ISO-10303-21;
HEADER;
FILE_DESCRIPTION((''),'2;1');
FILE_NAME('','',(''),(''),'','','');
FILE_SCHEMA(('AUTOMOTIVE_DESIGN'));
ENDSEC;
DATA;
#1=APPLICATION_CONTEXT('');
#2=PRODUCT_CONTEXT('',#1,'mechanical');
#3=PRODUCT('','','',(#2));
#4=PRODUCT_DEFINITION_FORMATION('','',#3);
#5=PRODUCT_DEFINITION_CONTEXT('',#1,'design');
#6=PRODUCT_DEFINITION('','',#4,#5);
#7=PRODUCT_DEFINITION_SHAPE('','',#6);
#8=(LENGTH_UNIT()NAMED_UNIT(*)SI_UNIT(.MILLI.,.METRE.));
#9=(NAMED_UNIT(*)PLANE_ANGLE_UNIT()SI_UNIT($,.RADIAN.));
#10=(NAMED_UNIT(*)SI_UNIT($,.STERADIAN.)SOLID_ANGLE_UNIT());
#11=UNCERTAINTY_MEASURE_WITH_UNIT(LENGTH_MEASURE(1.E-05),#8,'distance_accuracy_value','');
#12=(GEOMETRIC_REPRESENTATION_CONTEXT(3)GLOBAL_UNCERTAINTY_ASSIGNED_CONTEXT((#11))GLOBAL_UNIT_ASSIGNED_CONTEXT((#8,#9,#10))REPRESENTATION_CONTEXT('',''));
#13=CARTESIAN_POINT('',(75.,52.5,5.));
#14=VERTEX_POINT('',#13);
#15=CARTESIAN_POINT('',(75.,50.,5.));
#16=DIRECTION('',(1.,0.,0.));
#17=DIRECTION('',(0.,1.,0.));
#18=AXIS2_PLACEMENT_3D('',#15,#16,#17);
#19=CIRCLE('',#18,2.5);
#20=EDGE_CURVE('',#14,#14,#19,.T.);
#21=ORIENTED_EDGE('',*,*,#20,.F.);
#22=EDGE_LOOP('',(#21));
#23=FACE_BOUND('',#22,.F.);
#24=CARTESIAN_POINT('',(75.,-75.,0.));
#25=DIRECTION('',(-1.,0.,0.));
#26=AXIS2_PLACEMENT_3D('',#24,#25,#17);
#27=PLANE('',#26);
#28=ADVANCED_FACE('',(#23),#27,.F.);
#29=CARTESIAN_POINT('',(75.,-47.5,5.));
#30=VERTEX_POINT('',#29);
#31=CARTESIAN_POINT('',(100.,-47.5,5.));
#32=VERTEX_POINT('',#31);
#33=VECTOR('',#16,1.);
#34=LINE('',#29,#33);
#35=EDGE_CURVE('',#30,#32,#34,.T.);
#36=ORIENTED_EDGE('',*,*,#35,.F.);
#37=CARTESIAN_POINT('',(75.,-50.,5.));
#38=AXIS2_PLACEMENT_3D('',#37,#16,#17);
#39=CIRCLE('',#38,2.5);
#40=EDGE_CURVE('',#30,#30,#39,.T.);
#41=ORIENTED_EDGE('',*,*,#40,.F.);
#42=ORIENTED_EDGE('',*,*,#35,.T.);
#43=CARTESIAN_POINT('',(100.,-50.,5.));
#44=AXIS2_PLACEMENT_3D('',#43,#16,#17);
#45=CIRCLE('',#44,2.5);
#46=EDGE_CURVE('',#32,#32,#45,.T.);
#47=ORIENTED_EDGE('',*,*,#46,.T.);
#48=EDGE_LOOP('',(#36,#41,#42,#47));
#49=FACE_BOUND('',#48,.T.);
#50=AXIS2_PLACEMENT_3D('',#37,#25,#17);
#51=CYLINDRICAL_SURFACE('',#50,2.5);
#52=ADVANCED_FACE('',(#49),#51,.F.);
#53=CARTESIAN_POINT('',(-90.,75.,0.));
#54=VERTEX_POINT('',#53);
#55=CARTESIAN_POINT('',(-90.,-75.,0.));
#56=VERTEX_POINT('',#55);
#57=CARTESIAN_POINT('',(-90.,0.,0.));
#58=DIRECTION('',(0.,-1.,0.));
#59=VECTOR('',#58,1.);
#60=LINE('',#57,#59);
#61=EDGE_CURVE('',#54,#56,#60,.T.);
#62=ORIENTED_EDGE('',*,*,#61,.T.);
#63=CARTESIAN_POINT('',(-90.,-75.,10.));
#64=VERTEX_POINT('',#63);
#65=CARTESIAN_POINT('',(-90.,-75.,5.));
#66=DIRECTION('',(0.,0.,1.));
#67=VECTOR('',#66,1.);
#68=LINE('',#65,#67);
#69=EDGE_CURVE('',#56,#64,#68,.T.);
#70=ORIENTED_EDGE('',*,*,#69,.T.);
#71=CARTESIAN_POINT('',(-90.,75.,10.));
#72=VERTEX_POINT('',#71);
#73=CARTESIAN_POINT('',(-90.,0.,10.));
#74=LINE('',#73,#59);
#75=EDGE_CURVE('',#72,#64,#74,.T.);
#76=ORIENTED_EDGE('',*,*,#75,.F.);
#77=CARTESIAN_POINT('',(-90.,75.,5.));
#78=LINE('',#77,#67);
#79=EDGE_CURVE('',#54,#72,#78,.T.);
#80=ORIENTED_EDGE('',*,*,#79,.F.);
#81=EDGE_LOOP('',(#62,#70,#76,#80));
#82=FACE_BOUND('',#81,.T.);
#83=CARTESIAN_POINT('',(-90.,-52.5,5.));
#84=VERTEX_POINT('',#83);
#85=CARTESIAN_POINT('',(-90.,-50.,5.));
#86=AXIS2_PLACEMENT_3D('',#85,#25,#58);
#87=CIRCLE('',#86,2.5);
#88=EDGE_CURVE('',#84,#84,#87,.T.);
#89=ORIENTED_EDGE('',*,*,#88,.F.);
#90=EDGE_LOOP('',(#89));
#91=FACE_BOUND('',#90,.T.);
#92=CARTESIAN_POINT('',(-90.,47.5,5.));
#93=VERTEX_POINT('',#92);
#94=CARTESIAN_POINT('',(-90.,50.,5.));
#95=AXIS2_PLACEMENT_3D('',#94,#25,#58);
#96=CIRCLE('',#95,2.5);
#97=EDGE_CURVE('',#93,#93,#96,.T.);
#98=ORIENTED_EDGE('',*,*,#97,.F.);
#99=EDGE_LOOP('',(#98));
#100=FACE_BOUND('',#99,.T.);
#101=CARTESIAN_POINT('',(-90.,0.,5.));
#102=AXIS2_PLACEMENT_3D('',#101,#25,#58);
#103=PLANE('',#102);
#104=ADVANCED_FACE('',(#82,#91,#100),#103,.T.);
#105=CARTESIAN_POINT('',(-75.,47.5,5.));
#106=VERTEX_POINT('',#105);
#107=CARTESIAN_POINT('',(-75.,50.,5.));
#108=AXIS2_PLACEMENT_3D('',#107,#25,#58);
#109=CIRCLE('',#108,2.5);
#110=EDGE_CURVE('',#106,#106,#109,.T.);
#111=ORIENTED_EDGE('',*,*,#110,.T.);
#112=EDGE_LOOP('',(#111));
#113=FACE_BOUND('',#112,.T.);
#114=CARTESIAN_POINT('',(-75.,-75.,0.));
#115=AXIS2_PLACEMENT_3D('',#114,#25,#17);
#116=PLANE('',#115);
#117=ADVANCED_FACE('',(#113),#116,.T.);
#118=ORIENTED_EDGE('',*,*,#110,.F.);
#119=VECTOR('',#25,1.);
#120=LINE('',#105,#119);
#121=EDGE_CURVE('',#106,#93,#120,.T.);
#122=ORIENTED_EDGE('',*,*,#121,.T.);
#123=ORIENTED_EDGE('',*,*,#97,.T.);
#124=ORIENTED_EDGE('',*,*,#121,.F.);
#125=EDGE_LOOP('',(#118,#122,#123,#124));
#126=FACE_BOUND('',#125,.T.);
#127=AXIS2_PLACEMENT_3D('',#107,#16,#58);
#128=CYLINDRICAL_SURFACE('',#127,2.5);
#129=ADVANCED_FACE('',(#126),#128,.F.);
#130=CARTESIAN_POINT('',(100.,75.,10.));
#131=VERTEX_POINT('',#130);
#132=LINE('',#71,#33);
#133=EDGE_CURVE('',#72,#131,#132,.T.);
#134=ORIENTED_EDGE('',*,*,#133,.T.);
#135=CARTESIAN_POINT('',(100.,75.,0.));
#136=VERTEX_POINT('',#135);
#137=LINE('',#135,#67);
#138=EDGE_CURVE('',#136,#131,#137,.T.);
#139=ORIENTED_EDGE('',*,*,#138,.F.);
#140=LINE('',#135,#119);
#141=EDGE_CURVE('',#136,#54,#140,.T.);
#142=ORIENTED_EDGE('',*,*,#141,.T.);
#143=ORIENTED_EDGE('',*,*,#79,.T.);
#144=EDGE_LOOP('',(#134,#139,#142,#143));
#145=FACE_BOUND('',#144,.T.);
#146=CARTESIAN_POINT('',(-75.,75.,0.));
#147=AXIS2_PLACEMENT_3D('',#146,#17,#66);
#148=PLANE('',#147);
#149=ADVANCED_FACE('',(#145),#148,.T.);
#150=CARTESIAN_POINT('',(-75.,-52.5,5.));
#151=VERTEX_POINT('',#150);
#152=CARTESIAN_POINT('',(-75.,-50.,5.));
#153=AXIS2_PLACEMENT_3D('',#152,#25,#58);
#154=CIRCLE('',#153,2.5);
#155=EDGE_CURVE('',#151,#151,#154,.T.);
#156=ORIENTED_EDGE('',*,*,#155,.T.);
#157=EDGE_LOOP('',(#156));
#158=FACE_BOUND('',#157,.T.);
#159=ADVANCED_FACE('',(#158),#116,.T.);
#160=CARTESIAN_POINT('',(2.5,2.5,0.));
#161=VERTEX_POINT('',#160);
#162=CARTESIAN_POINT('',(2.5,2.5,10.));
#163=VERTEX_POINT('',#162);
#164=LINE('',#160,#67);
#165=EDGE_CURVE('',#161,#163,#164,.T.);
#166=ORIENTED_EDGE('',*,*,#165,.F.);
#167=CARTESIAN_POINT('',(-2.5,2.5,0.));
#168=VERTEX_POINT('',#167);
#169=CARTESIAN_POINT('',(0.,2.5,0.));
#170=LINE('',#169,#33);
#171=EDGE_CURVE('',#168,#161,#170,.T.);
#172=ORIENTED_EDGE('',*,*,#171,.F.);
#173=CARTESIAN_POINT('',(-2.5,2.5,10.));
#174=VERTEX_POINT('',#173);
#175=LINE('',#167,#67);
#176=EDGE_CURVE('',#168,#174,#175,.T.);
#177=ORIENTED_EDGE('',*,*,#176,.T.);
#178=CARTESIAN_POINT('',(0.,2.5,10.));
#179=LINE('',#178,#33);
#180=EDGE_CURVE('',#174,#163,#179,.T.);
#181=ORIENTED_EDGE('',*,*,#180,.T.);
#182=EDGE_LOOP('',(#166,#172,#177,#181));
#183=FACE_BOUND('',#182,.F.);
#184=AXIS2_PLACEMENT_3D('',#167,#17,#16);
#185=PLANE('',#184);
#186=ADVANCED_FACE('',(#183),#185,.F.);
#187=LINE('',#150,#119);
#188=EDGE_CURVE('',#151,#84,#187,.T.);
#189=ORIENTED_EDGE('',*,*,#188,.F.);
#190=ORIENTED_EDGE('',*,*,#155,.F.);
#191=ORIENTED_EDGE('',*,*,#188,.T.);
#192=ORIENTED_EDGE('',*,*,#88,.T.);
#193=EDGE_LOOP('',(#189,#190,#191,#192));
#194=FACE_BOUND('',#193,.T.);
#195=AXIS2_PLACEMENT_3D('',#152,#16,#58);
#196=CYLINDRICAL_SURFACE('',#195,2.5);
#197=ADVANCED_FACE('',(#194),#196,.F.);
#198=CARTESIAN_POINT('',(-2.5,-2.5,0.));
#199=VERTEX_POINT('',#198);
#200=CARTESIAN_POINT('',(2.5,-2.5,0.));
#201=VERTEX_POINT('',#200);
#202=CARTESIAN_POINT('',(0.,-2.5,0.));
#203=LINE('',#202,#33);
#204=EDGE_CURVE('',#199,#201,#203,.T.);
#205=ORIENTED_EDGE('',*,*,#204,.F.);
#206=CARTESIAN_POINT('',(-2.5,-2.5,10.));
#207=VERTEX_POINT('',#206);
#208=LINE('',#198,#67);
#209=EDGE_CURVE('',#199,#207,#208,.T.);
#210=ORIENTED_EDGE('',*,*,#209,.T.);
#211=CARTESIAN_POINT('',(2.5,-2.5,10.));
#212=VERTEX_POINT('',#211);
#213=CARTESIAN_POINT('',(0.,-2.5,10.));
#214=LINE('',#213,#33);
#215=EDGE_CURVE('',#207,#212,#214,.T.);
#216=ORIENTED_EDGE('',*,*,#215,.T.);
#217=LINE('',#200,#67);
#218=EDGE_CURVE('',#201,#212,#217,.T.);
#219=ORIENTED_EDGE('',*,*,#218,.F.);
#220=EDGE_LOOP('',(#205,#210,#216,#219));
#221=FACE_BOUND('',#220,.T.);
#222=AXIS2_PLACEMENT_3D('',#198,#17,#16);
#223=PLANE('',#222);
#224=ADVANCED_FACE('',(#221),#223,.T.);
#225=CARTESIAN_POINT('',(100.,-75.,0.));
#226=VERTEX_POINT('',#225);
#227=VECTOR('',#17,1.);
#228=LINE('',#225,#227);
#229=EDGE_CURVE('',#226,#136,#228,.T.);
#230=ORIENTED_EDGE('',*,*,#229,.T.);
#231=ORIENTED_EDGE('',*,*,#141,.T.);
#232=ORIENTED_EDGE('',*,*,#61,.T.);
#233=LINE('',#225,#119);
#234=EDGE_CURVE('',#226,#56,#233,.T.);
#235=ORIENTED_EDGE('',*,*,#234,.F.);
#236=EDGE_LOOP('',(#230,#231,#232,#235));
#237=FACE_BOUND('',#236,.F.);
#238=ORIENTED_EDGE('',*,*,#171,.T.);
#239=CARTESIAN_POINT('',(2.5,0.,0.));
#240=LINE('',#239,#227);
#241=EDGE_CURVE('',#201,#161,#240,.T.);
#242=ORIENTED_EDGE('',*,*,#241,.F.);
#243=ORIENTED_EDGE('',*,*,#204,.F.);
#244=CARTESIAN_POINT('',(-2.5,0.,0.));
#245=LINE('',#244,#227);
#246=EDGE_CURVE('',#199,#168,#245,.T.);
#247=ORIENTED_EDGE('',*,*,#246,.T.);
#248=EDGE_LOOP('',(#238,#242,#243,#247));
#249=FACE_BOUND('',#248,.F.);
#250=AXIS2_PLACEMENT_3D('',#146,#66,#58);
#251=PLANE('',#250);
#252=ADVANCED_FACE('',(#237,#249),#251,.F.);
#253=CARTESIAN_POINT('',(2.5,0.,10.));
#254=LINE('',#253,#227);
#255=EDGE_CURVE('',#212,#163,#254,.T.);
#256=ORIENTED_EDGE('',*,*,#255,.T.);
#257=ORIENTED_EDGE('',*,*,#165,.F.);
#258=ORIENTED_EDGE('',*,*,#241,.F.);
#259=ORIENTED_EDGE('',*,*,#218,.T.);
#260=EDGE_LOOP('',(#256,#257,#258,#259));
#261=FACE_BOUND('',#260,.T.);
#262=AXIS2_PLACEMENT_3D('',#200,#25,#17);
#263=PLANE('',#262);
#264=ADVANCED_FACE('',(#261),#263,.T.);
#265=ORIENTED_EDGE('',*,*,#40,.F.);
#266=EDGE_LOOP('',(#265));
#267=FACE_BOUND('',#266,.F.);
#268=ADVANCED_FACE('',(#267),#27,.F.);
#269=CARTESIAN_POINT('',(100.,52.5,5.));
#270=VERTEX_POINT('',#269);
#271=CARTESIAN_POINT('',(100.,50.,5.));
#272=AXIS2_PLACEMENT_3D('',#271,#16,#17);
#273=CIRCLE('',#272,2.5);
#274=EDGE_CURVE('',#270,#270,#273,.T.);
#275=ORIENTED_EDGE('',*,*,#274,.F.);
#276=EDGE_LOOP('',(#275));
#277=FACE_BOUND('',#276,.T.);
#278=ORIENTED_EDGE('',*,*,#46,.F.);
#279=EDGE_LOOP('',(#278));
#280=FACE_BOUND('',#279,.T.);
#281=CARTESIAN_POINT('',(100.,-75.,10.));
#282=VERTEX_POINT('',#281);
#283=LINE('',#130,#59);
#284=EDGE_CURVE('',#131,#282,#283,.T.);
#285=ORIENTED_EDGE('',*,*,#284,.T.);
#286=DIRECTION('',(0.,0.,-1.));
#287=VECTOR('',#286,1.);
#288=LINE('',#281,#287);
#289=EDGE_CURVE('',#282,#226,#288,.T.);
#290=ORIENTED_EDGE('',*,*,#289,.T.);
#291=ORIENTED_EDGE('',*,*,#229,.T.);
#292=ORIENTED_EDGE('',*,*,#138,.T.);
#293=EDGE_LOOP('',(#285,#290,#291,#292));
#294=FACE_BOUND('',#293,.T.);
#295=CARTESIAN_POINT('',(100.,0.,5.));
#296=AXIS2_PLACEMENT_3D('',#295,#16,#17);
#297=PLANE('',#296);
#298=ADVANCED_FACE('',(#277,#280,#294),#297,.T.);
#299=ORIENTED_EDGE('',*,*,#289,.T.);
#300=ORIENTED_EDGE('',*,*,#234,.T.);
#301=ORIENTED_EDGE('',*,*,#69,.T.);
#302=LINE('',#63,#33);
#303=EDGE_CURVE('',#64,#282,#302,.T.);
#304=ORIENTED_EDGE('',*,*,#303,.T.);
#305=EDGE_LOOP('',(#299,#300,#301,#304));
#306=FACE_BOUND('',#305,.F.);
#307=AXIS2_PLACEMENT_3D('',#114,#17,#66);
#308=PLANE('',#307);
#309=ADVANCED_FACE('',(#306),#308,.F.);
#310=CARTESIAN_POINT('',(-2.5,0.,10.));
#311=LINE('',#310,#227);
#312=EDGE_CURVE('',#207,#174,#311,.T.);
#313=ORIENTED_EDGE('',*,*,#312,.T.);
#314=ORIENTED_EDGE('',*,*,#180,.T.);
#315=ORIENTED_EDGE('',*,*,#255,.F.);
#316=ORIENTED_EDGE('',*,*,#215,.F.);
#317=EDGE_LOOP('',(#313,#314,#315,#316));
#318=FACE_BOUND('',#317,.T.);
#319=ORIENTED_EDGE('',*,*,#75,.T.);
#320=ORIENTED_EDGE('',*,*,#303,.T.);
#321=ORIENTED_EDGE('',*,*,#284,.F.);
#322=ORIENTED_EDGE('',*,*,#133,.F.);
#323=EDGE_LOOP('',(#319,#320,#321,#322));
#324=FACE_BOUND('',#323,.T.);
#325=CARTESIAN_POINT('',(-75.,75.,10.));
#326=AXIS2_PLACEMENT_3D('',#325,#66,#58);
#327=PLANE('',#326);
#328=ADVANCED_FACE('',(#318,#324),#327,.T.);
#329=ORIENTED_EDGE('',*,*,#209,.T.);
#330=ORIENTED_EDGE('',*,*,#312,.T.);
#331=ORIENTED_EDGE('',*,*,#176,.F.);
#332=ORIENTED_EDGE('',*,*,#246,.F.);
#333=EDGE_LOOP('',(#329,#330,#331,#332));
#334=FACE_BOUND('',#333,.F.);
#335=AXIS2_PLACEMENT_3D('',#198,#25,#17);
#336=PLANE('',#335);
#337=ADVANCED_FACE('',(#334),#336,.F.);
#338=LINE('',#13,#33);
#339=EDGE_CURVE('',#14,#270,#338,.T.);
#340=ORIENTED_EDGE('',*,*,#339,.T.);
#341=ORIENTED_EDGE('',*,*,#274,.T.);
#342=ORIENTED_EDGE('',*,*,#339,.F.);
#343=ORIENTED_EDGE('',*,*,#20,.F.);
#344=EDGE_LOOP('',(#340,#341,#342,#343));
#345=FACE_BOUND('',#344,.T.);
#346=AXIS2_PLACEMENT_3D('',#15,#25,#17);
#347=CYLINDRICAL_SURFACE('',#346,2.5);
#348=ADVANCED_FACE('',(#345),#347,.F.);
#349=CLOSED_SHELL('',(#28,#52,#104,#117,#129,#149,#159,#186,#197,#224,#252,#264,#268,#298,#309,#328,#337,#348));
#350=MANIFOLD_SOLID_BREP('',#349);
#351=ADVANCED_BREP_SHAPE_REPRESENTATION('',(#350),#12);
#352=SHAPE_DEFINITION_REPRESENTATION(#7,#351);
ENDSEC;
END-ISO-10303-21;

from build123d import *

# Parameters (mm, degrees)
F0_W     = 150
F0_H     = 150
F0_W_2   = 5
F0_H_2   = 5
F1_DEPTH = 10
F3_R     = 2.5
F4_DEPTH = 25
F5_W     = 150
F5_H     = 10
F5_R     = 2.5
F6_DEPTH = 15


# Not quite as in the source:
# - a feature of the source that left no trace in its solid (it failed there, or was rolled back) is left out


with BuildPart() as f1:
    # F0 (on Top) → F1 (new body)
    with BuildSketch(Plane.XY):
        Rectangle(F0_W, F0_H)
        Rectangle(F0_W_2, F0_H_2, mode=Mode.SUBTRACT)
    extrude(amount=F1_DEPTH)

    # F3 (on face) → F4 (join)
    with BuildSketch(Plane.YZ.offset(75)):
        Polygon((75, 0), (75, 10), (-75, 10), (-75, 0), (0, 0), align=None)
        with Locations((-50, 5)):
            Circle(F3_R, mode=Mode.SUBTRACT)
        with Locations((50, 5)):
            Circle(F3_R, mode=Mode.SUBTRACT)
    extrude(amount=F4_DEPTH)

    # F5 (on face) → F6 (join)
    with BuildSketch(Plane(origin=(-75, 0, 0), x_dir=(0, -1, 0), z_dir=(-1, 0, 0))):
        with Locations((0, 5)):
            Rectangle(F5_W, F5_H)
        with Locations((-50, 5)):
            Circle(F5_R, mode=Mode.SUBTRACT)
        with Locations((50, 5)):
            Circle(F5_R, mode=Mode.SUBTRACT)
    extrude(amount=F6_DEPTH)


solid = f1.part
